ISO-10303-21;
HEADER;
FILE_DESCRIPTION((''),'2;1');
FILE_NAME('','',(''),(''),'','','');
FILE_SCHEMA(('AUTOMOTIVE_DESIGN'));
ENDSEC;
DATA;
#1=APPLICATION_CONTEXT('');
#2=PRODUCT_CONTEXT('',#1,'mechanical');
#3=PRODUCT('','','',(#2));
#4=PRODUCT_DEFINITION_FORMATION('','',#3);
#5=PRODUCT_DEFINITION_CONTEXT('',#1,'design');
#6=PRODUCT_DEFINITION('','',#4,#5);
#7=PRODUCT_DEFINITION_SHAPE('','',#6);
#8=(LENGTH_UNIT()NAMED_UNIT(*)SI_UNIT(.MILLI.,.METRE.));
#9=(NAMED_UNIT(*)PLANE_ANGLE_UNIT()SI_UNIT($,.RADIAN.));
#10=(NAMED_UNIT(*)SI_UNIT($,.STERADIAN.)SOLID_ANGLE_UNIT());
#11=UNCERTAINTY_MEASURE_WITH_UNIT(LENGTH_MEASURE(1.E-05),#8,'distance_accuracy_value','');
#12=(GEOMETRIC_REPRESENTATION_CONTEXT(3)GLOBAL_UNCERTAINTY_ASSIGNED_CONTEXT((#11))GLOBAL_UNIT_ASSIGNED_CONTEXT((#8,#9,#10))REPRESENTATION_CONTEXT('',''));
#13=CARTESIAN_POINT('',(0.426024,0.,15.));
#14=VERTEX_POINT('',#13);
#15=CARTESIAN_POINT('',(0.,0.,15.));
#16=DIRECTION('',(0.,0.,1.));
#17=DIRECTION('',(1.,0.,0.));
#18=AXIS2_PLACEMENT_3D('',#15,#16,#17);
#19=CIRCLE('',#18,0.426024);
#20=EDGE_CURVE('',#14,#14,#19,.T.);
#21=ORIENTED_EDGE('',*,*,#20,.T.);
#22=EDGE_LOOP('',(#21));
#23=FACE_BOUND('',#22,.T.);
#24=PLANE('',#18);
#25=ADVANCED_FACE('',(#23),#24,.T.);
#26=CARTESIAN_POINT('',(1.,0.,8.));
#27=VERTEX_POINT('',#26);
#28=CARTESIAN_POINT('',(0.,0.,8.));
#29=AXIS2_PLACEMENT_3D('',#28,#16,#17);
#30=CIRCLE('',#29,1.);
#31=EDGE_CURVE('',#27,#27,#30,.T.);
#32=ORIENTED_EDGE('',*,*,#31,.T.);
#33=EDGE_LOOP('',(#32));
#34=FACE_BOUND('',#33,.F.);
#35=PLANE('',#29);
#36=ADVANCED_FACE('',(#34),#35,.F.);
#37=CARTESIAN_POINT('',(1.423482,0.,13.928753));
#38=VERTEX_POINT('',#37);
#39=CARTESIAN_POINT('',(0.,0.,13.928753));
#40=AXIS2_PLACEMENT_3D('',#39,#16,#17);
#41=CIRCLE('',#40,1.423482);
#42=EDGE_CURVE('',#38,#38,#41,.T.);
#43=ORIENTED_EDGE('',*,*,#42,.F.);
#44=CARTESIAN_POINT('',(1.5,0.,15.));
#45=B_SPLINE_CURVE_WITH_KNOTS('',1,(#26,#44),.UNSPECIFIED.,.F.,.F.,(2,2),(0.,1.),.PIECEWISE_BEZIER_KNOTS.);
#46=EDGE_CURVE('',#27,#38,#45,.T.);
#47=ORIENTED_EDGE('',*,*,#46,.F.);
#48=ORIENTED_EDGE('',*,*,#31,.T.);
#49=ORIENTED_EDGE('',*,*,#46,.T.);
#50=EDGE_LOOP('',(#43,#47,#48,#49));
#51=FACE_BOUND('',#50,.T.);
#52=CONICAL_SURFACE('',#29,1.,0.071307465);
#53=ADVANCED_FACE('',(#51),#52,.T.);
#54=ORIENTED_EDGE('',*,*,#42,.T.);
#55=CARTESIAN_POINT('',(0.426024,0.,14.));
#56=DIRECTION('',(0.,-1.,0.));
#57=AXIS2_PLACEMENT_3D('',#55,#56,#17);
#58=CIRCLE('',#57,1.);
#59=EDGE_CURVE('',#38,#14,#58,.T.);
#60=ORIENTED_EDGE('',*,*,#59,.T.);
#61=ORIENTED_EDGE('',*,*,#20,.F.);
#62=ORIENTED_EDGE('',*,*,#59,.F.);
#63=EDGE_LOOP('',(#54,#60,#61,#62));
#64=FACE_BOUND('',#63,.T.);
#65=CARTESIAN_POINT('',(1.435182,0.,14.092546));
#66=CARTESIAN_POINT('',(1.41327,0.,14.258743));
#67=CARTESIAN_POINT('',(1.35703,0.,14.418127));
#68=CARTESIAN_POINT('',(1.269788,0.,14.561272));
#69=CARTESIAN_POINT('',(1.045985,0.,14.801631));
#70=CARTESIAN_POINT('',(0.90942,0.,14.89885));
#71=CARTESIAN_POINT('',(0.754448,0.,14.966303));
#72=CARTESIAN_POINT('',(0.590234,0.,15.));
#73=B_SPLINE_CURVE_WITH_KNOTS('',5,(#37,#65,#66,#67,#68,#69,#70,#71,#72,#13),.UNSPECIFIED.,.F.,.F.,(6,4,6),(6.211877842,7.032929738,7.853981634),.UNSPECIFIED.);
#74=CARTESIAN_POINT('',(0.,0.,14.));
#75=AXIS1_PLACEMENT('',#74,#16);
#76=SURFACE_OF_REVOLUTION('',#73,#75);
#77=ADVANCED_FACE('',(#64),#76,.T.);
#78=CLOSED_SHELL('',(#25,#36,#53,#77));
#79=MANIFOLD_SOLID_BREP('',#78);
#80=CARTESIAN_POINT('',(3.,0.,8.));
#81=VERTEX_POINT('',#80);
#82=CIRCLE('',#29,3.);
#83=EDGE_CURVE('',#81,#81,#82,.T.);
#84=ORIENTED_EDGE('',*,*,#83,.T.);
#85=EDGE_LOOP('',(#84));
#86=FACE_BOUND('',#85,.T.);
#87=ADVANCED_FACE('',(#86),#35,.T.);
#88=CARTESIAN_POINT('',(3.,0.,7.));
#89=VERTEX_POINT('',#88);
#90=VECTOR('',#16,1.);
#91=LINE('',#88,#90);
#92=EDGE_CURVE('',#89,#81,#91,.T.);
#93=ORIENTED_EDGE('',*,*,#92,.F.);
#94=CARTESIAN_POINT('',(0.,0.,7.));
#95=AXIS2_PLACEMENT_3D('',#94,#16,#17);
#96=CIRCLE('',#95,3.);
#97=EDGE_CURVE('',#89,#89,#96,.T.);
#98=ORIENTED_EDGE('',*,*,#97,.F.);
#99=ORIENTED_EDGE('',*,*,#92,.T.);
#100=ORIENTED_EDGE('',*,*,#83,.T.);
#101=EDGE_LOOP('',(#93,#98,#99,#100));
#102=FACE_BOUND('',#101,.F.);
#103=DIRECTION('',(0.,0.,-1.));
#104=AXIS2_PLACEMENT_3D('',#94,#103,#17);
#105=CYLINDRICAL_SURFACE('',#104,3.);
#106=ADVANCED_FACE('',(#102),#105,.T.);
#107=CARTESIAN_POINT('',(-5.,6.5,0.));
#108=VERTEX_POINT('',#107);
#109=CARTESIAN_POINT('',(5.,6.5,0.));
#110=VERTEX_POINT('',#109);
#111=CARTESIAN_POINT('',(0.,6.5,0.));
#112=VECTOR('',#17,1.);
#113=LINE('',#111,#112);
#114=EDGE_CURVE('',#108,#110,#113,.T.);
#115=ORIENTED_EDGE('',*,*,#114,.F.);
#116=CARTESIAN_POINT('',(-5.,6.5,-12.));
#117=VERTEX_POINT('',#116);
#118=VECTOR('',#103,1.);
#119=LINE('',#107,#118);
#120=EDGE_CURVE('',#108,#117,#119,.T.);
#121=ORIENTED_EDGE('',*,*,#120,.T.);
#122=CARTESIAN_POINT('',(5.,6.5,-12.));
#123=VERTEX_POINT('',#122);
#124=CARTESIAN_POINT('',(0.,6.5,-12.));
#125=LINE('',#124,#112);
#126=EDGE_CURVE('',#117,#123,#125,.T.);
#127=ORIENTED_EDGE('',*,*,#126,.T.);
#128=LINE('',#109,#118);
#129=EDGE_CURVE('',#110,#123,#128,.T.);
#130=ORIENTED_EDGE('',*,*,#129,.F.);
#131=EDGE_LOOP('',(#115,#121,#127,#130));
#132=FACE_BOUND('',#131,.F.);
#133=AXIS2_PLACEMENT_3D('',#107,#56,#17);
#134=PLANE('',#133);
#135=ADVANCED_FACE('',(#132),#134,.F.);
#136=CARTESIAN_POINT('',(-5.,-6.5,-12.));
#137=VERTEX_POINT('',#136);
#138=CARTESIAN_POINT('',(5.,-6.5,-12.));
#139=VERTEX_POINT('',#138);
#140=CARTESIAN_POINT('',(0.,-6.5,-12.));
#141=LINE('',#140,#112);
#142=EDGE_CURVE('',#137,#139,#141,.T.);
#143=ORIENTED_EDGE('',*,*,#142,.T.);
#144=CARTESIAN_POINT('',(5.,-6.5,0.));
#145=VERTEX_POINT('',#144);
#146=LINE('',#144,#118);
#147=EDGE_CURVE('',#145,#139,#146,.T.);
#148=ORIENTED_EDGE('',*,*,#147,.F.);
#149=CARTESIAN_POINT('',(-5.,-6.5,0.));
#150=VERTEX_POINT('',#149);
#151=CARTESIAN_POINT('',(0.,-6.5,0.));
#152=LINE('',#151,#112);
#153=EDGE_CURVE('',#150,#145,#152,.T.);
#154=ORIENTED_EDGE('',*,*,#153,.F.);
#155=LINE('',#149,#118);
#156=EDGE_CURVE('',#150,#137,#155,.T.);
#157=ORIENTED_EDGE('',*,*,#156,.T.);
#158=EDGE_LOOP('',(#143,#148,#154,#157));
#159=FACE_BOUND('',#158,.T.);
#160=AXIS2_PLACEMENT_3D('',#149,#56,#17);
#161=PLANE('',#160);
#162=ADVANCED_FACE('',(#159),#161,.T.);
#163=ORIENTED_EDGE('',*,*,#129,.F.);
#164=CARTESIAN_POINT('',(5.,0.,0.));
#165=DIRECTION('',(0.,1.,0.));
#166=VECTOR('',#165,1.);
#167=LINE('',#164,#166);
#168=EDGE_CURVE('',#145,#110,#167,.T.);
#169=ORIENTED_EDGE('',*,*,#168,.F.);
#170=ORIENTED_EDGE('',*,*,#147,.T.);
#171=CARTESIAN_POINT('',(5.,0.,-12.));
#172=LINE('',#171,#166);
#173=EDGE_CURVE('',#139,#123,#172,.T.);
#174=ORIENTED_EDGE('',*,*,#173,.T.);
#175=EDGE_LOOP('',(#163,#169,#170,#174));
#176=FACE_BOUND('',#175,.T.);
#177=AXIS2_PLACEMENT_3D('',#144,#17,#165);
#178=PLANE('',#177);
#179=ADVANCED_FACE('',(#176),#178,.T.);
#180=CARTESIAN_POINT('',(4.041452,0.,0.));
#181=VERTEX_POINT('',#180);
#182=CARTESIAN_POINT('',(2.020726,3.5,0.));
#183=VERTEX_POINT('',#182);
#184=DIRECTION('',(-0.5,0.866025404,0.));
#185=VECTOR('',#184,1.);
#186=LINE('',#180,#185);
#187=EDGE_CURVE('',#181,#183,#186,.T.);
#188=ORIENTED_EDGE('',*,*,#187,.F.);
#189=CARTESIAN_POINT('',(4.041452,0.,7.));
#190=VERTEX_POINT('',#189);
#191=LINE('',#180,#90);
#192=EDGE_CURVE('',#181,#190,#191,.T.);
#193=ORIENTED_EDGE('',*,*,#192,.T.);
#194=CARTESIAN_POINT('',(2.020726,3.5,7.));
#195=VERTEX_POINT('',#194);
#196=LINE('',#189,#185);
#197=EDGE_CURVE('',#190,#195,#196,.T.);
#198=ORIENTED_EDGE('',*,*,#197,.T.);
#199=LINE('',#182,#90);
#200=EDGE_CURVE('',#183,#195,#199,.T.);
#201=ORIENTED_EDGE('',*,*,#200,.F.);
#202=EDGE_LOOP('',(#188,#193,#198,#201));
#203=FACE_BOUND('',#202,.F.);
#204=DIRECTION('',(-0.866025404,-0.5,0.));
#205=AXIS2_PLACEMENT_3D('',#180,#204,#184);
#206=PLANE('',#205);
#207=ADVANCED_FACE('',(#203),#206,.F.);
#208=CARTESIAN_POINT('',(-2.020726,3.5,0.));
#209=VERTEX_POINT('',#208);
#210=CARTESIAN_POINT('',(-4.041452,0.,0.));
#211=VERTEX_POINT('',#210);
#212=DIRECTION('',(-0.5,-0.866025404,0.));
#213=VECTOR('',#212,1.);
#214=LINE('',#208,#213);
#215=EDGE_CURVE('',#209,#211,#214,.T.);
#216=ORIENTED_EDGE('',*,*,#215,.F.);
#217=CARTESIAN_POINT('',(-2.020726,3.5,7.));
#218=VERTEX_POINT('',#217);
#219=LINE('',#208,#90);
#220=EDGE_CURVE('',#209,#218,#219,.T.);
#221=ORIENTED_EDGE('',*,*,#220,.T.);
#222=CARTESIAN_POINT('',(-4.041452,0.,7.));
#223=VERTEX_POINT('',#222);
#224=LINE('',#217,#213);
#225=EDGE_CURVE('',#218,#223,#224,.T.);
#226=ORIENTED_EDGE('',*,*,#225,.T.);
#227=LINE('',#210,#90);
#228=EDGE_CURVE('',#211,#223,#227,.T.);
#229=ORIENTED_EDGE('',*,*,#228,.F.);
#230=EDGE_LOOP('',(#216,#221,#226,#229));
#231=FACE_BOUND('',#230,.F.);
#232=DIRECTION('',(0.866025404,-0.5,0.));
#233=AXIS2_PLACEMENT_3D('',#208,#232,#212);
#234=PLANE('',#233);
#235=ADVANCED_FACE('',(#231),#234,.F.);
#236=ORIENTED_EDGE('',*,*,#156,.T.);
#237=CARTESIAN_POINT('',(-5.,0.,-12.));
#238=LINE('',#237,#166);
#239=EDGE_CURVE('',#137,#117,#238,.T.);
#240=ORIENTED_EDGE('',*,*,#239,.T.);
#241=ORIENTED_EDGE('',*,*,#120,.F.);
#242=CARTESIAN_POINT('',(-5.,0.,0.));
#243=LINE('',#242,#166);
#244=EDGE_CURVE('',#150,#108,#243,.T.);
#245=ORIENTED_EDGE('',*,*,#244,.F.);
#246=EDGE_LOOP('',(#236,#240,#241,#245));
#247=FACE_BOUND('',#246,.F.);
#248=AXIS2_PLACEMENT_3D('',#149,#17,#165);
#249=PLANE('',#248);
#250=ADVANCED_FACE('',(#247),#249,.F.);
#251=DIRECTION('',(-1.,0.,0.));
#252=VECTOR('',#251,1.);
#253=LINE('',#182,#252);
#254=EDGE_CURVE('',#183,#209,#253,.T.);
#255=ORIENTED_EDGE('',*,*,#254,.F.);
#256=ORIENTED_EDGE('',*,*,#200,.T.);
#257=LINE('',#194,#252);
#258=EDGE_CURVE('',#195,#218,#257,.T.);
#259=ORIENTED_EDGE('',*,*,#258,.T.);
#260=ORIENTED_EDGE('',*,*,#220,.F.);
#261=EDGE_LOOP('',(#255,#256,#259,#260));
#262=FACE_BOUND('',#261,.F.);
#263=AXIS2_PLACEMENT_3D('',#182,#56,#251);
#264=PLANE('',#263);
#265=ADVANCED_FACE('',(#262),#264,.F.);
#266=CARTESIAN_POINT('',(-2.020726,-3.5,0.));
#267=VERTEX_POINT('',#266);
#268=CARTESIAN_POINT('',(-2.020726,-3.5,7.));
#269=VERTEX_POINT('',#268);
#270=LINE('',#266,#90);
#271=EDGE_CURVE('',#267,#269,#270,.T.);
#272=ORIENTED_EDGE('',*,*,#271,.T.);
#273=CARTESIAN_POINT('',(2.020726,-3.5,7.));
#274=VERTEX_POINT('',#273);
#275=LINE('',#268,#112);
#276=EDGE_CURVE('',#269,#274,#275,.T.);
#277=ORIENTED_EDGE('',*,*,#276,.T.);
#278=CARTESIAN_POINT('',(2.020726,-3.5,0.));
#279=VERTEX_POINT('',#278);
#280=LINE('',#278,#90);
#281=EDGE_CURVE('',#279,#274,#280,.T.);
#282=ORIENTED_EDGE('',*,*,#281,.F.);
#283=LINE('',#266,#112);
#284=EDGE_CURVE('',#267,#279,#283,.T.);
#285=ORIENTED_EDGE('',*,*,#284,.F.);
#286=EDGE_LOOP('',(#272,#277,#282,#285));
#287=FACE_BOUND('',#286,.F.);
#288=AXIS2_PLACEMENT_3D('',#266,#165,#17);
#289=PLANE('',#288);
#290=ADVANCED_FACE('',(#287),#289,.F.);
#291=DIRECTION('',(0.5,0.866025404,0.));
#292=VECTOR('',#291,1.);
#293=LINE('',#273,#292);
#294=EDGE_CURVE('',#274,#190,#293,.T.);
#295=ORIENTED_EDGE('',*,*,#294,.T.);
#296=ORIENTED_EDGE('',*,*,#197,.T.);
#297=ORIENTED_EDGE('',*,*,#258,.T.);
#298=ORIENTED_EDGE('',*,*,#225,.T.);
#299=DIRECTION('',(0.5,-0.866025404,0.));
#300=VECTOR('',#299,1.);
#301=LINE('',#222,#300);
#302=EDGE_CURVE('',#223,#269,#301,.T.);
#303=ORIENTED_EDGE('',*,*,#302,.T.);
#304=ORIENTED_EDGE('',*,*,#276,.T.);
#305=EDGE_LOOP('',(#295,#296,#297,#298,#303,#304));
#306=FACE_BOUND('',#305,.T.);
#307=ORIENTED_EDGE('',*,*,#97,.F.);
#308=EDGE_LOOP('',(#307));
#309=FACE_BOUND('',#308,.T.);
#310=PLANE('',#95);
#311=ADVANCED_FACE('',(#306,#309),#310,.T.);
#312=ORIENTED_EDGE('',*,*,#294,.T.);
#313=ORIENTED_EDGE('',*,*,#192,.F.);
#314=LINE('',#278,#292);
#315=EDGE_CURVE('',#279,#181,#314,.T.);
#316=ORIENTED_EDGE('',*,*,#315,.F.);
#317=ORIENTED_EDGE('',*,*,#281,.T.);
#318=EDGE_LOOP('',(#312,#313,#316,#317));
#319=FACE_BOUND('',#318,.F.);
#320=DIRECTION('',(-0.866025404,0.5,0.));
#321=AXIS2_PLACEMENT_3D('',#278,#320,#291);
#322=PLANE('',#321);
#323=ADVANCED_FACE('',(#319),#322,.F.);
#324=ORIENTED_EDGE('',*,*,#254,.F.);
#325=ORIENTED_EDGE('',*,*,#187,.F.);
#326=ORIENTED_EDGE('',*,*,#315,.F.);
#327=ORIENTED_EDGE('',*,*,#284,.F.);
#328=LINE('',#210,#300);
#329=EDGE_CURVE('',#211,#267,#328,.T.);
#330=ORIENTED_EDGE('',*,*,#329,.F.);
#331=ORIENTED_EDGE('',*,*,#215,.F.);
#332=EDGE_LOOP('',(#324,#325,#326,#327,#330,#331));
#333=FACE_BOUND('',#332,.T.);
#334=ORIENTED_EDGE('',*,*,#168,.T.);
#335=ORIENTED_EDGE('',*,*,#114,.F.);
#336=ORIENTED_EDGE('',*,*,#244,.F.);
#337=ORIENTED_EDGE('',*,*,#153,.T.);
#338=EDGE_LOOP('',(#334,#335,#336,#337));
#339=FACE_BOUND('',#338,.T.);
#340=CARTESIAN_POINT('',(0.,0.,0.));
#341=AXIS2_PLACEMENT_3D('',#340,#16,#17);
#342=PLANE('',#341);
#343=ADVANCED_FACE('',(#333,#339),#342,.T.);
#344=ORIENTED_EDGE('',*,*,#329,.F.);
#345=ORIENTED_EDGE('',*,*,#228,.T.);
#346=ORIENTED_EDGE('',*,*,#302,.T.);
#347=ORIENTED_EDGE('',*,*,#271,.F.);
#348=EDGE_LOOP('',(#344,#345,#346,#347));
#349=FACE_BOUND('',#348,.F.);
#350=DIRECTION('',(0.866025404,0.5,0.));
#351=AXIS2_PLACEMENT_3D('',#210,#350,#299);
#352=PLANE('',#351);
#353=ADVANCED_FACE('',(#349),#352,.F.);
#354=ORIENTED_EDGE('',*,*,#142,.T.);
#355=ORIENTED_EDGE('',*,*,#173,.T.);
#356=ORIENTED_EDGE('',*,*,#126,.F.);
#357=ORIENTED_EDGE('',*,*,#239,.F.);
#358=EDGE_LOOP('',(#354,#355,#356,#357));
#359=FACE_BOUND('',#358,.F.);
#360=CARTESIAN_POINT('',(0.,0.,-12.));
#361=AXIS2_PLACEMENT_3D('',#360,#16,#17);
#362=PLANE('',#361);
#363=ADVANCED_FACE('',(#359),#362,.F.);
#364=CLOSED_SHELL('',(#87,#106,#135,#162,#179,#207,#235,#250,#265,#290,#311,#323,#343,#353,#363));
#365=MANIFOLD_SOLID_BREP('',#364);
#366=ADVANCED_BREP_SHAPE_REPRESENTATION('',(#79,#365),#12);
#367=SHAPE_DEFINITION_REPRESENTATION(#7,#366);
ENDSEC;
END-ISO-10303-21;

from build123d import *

# Parameters (mm, degrees)
F0_W     = 10
F0_H     = 13
F1_DEPTH = 12
F2_DEPTH = 7
F3_R     = 3
F4_DEPTH = 1
F5_R     = 1
F7_R     = 1.5
F9_R     = 1


with BuildPart() as f1:
    # F0 (on Top) → F1 (new body)
    with BuildSketch(Plane.XY):
        Rectangle(F0_W, F0_H)
        Polygon((4.0414518843, 0), (2.0207259422, -3.5), (-2.0207259422, -3.5), (-4.0414518843, 0), (-2.0207259422, 3.5), (2.0207259422, 3.5), align=None, mode=Mode.SUBTRACT)
        Polygon((-2.0207259422, -3.5), (2.0207259422, -3.5), (4.0414518843, 0), (2.0207259422, 3.5), (-2.0207259422, 3.5), (-4.0414518843, 0), align=None)
    extrude(amount=-F1_DEPTH)

    # F0 (on Top) → F2 (join)
    with BuildSketch(Plane.XY):
        Polygon((-2.0207259422, -3.5), (2.0207259422, -3.5), (4.0414518843, 0), (2.0207259422, 3.5), (-2.0207259422, 3.5), (-4.0414518843, 0), align=None)
    extrude(amount=F2_DEPTH)

    # F3 (on face) → F4 (join)
    with BuildSketch(Plane.XY.offset(7)):
        Circle(F3_R)
    extrude(amount=F4_DEPTH)


with BuildPart() as f8:
    # F5 (on face) → F8 section 0
    with BuildSketch(Plane.XY.offset(8)):
        Circle(F5_R)
    # F7 (on offset) → F8 section 1
    with BuildSketch(Plane.XY.offset(15)):
        Circle(F7_R)
    loft()

    # F9
    f9_edges = [f8.edges().sort_by_distance(p)[0] for p in [
        (-1.5, 0, 15),
    ]]
    fillet(f9_edges, radius=F9_R)


solid = Compound([f1.part, f8.part])
